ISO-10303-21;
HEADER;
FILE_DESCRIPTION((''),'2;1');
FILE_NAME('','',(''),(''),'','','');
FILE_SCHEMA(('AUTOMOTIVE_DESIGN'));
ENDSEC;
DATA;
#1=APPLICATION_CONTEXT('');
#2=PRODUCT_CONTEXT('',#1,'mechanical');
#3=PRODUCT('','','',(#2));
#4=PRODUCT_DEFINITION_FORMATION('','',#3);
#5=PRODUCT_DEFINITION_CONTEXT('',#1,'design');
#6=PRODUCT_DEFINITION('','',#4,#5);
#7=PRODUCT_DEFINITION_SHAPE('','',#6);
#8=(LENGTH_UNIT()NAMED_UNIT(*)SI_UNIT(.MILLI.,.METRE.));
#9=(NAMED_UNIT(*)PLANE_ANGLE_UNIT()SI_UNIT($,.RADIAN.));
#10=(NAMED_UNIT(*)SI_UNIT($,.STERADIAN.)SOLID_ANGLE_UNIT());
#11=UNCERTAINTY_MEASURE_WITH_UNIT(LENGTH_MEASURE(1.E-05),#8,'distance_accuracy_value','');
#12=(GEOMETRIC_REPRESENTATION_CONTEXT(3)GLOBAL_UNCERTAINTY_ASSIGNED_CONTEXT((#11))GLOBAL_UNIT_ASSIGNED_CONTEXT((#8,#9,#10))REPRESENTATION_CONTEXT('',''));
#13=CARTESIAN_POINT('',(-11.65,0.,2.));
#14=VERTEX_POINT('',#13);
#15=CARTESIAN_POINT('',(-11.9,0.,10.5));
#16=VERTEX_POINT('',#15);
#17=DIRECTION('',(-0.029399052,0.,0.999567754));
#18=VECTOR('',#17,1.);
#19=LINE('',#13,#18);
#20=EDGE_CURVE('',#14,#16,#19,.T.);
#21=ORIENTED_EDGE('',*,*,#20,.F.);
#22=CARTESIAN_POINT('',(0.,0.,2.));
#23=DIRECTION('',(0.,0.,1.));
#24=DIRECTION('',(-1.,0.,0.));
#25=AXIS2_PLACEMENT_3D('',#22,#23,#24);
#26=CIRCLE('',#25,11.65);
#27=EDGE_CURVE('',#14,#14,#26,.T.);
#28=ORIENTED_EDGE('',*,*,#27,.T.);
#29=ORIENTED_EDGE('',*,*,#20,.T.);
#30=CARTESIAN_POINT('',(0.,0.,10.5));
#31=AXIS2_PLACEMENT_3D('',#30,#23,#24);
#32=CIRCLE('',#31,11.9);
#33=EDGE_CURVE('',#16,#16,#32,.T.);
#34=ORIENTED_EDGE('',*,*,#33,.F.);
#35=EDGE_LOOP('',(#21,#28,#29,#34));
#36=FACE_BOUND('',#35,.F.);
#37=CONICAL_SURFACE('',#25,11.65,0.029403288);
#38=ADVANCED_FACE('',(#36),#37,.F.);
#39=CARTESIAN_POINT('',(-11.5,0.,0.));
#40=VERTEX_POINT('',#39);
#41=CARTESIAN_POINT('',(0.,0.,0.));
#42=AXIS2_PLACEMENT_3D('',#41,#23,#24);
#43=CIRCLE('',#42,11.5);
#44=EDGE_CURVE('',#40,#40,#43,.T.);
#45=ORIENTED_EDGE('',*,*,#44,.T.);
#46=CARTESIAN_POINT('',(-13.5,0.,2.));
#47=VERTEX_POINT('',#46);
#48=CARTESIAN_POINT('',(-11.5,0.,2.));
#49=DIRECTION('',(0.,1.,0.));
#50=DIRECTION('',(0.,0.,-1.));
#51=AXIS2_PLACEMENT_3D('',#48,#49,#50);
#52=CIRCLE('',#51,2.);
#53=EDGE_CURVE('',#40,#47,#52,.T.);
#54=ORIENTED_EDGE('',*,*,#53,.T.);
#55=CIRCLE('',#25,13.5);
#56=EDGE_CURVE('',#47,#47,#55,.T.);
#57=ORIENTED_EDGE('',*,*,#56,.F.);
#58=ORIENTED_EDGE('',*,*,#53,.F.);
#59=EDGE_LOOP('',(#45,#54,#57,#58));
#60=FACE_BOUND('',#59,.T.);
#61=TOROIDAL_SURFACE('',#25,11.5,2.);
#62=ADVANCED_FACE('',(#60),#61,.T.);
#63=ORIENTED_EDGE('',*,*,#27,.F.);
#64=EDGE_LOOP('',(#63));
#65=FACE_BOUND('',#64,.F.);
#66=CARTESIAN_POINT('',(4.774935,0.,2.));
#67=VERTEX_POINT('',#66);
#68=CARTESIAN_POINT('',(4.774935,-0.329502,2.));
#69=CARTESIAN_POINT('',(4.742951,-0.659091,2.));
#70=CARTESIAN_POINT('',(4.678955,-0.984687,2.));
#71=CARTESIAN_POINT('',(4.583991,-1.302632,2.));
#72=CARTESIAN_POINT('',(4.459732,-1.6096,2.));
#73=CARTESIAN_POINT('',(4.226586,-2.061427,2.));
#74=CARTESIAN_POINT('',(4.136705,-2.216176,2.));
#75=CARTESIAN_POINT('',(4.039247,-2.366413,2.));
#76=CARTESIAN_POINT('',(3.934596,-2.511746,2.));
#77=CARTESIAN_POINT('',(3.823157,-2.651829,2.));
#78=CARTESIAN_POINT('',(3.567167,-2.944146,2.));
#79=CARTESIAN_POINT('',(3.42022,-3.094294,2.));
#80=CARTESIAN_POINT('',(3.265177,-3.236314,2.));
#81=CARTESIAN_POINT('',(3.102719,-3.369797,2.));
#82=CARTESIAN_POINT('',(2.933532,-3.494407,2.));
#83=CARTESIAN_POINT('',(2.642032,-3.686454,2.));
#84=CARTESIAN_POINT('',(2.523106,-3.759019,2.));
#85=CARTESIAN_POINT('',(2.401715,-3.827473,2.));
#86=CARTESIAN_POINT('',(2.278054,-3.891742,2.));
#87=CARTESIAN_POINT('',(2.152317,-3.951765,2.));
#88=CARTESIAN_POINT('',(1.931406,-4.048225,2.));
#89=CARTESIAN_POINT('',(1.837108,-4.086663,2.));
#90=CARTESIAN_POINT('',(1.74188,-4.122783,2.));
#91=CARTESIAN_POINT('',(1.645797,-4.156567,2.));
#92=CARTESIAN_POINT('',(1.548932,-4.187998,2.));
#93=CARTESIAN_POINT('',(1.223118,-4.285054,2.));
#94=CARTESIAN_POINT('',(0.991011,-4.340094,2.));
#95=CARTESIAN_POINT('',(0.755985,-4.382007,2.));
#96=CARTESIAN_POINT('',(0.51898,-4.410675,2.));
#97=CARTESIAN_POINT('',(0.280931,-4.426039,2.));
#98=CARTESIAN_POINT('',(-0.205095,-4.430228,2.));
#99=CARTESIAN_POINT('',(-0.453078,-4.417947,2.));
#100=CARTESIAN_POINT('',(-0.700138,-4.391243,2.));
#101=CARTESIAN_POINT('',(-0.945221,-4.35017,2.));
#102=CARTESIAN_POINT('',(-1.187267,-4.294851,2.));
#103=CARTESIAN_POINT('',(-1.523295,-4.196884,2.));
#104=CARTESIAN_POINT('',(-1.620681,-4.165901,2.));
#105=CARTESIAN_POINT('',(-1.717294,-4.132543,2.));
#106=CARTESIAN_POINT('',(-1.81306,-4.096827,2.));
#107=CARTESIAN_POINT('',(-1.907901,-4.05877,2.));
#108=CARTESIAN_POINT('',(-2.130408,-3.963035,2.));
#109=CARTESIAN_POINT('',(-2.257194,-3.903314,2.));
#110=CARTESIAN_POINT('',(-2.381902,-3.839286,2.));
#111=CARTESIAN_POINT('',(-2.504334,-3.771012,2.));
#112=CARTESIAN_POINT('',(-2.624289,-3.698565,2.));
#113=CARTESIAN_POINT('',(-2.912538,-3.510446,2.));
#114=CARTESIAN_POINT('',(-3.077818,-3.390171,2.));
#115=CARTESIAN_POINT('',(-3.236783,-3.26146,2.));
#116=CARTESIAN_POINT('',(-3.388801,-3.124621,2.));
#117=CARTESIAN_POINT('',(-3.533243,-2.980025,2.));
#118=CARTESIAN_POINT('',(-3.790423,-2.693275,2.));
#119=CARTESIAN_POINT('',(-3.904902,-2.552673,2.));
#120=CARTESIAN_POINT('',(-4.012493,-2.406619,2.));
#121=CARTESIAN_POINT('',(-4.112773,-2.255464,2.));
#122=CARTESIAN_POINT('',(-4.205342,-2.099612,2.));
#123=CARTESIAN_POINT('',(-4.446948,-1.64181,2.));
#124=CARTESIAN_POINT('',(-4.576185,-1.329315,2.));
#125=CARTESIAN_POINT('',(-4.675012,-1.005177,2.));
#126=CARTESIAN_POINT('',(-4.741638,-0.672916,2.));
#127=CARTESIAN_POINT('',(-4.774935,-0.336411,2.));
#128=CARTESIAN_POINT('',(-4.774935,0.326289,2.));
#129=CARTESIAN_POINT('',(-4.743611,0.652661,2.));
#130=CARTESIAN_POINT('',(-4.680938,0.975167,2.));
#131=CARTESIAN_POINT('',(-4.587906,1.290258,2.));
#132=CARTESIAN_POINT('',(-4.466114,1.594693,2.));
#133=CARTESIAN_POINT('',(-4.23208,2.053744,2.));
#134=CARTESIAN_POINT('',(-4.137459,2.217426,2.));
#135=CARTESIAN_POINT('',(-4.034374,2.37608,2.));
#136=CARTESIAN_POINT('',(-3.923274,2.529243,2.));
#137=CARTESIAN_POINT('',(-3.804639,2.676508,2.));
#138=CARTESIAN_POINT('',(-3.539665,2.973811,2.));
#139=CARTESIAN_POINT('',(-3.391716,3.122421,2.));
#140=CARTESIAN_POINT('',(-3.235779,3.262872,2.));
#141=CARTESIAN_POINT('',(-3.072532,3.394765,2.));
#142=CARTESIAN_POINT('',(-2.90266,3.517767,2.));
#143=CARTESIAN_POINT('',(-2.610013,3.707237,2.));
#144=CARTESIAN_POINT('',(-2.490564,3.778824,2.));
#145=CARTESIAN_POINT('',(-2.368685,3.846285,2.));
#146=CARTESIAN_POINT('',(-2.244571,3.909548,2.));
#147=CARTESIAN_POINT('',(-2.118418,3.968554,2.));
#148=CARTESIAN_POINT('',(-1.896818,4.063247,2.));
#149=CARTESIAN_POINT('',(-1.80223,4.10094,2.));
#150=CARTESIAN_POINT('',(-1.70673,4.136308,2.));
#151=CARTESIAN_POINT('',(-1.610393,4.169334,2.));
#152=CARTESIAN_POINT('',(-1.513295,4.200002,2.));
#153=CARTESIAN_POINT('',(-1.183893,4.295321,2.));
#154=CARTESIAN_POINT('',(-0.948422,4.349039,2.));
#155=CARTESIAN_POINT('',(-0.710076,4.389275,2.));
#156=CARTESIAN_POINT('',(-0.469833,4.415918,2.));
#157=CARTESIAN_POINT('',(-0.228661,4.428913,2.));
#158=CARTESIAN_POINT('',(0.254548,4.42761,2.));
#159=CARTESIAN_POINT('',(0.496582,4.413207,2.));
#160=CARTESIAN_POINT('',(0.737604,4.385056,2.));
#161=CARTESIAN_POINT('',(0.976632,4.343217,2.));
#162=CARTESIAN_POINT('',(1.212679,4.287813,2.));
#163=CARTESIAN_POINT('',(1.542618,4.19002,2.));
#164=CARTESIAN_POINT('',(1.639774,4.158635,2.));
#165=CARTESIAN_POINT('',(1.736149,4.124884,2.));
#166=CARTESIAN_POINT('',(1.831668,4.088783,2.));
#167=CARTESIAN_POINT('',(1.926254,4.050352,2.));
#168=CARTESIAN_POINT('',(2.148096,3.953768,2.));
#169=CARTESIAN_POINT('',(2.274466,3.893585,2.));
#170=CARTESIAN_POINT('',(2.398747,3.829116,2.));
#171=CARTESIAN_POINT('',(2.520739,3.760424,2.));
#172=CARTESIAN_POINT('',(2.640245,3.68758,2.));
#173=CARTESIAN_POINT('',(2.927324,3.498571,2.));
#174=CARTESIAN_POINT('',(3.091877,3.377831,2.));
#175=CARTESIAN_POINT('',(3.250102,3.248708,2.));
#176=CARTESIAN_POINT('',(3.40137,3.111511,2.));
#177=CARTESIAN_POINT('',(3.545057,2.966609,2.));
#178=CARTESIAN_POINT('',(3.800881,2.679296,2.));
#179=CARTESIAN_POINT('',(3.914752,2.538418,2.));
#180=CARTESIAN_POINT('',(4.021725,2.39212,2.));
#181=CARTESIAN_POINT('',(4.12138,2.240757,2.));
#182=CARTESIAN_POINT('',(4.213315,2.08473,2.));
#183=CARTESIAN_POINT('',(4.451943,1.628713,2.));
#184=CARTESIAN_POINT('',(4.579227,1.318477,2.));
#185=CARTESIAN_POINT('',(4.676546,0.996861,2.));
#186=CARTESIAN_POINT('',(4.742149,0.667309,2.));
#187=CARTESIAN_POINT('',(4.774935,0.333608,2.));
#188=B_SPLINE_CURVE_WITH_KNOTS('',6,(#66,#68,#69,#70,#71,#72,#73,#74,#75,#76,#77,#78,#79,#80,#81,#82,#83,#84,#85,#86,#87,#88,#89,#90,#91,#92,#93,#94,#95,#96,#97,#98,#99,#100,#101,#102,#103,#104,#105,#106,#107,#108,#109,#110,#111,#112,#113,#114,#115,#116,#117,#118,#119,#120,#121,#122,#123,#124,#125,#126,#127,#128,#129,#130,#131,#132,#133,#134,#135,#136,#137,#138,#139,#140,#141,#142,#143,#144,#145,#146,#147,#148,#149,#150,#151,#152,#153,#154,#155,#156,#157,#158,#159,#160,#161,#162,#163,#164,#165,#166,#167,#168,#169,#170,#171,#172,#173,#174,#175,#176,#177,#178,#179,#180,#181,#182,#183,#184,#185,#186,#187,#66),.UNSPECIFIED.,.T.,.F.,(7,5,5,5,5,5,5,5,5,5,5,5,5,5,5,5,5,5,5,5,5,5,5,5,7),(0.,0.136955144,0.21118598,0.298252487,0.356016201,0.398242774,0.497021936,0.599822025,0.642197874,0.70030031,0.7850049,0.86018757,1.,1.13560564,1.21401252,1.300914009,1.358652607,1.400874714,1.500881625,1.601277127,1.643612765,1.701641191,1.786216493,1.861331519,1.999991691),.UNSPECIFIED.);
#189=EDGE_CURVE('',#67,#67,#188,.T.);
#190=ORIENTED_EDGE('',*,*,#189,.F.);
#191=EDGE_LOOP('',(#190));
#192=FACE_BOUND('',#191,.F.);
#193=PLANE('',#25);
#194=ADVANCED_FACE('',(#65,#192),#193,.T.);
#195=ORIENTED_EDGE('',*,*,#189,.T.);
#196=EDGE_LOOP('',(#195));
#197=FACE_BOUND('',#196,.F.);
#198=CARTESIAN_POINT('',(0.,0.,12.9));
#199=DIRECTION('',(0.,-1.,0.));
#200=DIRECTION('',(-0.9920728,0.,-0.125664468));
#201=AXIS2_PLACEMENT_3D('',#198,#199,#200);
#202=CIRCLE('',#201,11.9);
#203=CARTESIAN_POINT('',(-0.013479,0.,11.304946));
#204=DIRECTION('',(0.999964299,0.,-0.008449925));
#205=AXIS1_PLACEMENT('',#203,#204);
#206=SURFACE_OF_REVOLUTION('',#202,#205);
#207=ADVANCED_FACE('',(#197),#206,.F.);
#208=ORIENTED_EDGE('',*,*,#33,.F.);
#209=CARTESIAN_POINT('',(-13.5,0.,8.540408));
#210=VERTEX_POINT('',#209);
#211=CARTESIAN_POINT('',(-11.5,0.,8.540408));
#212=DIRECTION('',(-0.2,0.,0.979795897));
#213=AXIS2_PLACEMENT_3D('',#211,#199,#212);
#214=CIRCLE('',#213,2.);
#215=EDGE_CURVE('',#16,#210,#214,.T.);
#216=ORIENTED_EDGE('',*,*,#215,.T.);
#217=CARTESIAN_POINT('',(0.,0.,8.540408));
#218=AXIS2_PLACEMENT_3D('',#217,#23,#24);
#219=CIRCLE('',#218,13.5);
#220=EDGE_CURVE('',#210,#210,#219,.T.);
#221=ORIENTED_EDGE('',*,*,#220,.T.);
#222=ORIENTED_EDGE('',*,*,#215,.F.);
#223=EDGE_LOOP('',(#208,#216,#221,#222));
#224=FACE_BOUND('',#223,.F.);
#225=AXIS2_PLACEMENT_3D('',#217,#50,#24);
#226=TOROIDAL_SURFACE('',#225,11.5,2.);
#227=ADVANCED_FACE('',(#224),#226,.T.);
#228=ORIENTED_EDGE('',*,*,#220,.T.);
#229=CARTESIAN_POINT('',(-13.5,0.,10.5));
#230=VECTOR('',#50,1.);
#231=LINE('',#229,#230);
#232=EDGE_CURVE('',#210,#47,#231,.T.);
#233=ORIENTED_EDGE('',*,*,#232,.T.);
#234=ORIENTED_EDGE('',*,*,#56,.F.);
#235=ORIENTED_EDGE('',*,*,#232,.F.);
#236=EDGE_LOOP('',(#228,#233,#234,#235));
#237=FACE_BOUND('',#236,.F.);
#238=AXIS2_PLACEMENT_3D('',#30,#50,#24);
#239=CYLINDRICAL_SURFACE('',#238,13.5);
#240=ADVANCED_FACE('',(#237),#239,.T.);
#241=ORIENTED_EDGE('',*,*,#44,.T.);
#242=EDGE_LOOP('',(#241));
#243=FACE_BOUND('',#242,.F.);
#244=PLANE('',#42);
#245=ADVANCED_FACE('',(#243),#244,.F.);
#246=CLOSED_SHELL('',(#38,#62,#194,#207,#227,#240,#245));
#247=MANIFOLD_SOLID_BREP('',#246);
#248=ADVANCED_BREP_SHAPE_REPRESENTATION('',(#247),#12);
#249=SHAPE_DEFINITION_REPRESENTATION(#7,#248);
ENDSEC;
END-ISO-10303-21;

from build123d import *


# Not quite as in the source:
# - a fillet or chamfer that OpenCascade refuses, or shapes differently, is made with other operations: its cross-section is extruded or revolved along the edge and cut away or added


with BuildPart() as f1:
    # F0 (on Front) → F1 (revolve)
    with BuildSketch(Plane.XZ):
        Polygon((-13.5, 0), (0, 0), (0, 2), (-11.65, 2), (-13.5, 2), align=None)
        Polygon((-13.5, 10.5), (-13.5, 2), (-11.65, 2), (-11.9, 10.5), align=None)
    revolve(axis=Axis((0, 0, 1), (0, 0, 1)))

    # F2: fillet of radius 2 on 2 edges, made by hand

    # F2_s1 → F2_t2 (revolve, cut)
    with BuildSketch(Plane.XZ):
        with BuildLine():
            ThreePointArc((-11.9, 10.5), (-13.0491933385, 9.8053192698), (-13.5, 8.5404082058))
            Line((-13.5, 8.5404082058), (-13.5, 10.5))
            Line((-13.5, 10.5), (-11.9, 10.5))
        make_face()
    revolve(axis=Axis((0, 0, 10.5), (0, 0, 1)), mode=Mode.SUBTRACT)

    # F2_s3 → F2_t4 (revolve, cut)
    with BuildSketch(Plane.XZ):
        with BuildLine():
            ThreePointArc((-11.5, 0), (-12.9142135624, 0.5857864376), (-13.5, 2))
            Line((-13.5, 2), (-13.5, 0))
            Line((-13.5, 0), (-11.5, 0))
        make_face()
    revolve(axis=Axis((0, 0, 0), (0, 0, 1)), mode=Mode.SUBTRACT)

    # F3 (on Front) → F4 (revolve, cut)
    with BuildSketch(Plane.XZ):
        with BuildLine():
            Line((11.7787091929, 11.2052995105), (-11.8056663253, 11.404592826))
            ThreePointArc((-11.8056663253, 11.404592826), (-0.1005541056, 1.0004248449), (11.7787091929, 11.2052995105))
        make_face()
    revolve(axis=Axis((-0.0134785662, 0, 11.3049461682), (0.9999642987, 0, -0.0084499248)), mode=Mode.SUBTRACT)


solid = f1.part
